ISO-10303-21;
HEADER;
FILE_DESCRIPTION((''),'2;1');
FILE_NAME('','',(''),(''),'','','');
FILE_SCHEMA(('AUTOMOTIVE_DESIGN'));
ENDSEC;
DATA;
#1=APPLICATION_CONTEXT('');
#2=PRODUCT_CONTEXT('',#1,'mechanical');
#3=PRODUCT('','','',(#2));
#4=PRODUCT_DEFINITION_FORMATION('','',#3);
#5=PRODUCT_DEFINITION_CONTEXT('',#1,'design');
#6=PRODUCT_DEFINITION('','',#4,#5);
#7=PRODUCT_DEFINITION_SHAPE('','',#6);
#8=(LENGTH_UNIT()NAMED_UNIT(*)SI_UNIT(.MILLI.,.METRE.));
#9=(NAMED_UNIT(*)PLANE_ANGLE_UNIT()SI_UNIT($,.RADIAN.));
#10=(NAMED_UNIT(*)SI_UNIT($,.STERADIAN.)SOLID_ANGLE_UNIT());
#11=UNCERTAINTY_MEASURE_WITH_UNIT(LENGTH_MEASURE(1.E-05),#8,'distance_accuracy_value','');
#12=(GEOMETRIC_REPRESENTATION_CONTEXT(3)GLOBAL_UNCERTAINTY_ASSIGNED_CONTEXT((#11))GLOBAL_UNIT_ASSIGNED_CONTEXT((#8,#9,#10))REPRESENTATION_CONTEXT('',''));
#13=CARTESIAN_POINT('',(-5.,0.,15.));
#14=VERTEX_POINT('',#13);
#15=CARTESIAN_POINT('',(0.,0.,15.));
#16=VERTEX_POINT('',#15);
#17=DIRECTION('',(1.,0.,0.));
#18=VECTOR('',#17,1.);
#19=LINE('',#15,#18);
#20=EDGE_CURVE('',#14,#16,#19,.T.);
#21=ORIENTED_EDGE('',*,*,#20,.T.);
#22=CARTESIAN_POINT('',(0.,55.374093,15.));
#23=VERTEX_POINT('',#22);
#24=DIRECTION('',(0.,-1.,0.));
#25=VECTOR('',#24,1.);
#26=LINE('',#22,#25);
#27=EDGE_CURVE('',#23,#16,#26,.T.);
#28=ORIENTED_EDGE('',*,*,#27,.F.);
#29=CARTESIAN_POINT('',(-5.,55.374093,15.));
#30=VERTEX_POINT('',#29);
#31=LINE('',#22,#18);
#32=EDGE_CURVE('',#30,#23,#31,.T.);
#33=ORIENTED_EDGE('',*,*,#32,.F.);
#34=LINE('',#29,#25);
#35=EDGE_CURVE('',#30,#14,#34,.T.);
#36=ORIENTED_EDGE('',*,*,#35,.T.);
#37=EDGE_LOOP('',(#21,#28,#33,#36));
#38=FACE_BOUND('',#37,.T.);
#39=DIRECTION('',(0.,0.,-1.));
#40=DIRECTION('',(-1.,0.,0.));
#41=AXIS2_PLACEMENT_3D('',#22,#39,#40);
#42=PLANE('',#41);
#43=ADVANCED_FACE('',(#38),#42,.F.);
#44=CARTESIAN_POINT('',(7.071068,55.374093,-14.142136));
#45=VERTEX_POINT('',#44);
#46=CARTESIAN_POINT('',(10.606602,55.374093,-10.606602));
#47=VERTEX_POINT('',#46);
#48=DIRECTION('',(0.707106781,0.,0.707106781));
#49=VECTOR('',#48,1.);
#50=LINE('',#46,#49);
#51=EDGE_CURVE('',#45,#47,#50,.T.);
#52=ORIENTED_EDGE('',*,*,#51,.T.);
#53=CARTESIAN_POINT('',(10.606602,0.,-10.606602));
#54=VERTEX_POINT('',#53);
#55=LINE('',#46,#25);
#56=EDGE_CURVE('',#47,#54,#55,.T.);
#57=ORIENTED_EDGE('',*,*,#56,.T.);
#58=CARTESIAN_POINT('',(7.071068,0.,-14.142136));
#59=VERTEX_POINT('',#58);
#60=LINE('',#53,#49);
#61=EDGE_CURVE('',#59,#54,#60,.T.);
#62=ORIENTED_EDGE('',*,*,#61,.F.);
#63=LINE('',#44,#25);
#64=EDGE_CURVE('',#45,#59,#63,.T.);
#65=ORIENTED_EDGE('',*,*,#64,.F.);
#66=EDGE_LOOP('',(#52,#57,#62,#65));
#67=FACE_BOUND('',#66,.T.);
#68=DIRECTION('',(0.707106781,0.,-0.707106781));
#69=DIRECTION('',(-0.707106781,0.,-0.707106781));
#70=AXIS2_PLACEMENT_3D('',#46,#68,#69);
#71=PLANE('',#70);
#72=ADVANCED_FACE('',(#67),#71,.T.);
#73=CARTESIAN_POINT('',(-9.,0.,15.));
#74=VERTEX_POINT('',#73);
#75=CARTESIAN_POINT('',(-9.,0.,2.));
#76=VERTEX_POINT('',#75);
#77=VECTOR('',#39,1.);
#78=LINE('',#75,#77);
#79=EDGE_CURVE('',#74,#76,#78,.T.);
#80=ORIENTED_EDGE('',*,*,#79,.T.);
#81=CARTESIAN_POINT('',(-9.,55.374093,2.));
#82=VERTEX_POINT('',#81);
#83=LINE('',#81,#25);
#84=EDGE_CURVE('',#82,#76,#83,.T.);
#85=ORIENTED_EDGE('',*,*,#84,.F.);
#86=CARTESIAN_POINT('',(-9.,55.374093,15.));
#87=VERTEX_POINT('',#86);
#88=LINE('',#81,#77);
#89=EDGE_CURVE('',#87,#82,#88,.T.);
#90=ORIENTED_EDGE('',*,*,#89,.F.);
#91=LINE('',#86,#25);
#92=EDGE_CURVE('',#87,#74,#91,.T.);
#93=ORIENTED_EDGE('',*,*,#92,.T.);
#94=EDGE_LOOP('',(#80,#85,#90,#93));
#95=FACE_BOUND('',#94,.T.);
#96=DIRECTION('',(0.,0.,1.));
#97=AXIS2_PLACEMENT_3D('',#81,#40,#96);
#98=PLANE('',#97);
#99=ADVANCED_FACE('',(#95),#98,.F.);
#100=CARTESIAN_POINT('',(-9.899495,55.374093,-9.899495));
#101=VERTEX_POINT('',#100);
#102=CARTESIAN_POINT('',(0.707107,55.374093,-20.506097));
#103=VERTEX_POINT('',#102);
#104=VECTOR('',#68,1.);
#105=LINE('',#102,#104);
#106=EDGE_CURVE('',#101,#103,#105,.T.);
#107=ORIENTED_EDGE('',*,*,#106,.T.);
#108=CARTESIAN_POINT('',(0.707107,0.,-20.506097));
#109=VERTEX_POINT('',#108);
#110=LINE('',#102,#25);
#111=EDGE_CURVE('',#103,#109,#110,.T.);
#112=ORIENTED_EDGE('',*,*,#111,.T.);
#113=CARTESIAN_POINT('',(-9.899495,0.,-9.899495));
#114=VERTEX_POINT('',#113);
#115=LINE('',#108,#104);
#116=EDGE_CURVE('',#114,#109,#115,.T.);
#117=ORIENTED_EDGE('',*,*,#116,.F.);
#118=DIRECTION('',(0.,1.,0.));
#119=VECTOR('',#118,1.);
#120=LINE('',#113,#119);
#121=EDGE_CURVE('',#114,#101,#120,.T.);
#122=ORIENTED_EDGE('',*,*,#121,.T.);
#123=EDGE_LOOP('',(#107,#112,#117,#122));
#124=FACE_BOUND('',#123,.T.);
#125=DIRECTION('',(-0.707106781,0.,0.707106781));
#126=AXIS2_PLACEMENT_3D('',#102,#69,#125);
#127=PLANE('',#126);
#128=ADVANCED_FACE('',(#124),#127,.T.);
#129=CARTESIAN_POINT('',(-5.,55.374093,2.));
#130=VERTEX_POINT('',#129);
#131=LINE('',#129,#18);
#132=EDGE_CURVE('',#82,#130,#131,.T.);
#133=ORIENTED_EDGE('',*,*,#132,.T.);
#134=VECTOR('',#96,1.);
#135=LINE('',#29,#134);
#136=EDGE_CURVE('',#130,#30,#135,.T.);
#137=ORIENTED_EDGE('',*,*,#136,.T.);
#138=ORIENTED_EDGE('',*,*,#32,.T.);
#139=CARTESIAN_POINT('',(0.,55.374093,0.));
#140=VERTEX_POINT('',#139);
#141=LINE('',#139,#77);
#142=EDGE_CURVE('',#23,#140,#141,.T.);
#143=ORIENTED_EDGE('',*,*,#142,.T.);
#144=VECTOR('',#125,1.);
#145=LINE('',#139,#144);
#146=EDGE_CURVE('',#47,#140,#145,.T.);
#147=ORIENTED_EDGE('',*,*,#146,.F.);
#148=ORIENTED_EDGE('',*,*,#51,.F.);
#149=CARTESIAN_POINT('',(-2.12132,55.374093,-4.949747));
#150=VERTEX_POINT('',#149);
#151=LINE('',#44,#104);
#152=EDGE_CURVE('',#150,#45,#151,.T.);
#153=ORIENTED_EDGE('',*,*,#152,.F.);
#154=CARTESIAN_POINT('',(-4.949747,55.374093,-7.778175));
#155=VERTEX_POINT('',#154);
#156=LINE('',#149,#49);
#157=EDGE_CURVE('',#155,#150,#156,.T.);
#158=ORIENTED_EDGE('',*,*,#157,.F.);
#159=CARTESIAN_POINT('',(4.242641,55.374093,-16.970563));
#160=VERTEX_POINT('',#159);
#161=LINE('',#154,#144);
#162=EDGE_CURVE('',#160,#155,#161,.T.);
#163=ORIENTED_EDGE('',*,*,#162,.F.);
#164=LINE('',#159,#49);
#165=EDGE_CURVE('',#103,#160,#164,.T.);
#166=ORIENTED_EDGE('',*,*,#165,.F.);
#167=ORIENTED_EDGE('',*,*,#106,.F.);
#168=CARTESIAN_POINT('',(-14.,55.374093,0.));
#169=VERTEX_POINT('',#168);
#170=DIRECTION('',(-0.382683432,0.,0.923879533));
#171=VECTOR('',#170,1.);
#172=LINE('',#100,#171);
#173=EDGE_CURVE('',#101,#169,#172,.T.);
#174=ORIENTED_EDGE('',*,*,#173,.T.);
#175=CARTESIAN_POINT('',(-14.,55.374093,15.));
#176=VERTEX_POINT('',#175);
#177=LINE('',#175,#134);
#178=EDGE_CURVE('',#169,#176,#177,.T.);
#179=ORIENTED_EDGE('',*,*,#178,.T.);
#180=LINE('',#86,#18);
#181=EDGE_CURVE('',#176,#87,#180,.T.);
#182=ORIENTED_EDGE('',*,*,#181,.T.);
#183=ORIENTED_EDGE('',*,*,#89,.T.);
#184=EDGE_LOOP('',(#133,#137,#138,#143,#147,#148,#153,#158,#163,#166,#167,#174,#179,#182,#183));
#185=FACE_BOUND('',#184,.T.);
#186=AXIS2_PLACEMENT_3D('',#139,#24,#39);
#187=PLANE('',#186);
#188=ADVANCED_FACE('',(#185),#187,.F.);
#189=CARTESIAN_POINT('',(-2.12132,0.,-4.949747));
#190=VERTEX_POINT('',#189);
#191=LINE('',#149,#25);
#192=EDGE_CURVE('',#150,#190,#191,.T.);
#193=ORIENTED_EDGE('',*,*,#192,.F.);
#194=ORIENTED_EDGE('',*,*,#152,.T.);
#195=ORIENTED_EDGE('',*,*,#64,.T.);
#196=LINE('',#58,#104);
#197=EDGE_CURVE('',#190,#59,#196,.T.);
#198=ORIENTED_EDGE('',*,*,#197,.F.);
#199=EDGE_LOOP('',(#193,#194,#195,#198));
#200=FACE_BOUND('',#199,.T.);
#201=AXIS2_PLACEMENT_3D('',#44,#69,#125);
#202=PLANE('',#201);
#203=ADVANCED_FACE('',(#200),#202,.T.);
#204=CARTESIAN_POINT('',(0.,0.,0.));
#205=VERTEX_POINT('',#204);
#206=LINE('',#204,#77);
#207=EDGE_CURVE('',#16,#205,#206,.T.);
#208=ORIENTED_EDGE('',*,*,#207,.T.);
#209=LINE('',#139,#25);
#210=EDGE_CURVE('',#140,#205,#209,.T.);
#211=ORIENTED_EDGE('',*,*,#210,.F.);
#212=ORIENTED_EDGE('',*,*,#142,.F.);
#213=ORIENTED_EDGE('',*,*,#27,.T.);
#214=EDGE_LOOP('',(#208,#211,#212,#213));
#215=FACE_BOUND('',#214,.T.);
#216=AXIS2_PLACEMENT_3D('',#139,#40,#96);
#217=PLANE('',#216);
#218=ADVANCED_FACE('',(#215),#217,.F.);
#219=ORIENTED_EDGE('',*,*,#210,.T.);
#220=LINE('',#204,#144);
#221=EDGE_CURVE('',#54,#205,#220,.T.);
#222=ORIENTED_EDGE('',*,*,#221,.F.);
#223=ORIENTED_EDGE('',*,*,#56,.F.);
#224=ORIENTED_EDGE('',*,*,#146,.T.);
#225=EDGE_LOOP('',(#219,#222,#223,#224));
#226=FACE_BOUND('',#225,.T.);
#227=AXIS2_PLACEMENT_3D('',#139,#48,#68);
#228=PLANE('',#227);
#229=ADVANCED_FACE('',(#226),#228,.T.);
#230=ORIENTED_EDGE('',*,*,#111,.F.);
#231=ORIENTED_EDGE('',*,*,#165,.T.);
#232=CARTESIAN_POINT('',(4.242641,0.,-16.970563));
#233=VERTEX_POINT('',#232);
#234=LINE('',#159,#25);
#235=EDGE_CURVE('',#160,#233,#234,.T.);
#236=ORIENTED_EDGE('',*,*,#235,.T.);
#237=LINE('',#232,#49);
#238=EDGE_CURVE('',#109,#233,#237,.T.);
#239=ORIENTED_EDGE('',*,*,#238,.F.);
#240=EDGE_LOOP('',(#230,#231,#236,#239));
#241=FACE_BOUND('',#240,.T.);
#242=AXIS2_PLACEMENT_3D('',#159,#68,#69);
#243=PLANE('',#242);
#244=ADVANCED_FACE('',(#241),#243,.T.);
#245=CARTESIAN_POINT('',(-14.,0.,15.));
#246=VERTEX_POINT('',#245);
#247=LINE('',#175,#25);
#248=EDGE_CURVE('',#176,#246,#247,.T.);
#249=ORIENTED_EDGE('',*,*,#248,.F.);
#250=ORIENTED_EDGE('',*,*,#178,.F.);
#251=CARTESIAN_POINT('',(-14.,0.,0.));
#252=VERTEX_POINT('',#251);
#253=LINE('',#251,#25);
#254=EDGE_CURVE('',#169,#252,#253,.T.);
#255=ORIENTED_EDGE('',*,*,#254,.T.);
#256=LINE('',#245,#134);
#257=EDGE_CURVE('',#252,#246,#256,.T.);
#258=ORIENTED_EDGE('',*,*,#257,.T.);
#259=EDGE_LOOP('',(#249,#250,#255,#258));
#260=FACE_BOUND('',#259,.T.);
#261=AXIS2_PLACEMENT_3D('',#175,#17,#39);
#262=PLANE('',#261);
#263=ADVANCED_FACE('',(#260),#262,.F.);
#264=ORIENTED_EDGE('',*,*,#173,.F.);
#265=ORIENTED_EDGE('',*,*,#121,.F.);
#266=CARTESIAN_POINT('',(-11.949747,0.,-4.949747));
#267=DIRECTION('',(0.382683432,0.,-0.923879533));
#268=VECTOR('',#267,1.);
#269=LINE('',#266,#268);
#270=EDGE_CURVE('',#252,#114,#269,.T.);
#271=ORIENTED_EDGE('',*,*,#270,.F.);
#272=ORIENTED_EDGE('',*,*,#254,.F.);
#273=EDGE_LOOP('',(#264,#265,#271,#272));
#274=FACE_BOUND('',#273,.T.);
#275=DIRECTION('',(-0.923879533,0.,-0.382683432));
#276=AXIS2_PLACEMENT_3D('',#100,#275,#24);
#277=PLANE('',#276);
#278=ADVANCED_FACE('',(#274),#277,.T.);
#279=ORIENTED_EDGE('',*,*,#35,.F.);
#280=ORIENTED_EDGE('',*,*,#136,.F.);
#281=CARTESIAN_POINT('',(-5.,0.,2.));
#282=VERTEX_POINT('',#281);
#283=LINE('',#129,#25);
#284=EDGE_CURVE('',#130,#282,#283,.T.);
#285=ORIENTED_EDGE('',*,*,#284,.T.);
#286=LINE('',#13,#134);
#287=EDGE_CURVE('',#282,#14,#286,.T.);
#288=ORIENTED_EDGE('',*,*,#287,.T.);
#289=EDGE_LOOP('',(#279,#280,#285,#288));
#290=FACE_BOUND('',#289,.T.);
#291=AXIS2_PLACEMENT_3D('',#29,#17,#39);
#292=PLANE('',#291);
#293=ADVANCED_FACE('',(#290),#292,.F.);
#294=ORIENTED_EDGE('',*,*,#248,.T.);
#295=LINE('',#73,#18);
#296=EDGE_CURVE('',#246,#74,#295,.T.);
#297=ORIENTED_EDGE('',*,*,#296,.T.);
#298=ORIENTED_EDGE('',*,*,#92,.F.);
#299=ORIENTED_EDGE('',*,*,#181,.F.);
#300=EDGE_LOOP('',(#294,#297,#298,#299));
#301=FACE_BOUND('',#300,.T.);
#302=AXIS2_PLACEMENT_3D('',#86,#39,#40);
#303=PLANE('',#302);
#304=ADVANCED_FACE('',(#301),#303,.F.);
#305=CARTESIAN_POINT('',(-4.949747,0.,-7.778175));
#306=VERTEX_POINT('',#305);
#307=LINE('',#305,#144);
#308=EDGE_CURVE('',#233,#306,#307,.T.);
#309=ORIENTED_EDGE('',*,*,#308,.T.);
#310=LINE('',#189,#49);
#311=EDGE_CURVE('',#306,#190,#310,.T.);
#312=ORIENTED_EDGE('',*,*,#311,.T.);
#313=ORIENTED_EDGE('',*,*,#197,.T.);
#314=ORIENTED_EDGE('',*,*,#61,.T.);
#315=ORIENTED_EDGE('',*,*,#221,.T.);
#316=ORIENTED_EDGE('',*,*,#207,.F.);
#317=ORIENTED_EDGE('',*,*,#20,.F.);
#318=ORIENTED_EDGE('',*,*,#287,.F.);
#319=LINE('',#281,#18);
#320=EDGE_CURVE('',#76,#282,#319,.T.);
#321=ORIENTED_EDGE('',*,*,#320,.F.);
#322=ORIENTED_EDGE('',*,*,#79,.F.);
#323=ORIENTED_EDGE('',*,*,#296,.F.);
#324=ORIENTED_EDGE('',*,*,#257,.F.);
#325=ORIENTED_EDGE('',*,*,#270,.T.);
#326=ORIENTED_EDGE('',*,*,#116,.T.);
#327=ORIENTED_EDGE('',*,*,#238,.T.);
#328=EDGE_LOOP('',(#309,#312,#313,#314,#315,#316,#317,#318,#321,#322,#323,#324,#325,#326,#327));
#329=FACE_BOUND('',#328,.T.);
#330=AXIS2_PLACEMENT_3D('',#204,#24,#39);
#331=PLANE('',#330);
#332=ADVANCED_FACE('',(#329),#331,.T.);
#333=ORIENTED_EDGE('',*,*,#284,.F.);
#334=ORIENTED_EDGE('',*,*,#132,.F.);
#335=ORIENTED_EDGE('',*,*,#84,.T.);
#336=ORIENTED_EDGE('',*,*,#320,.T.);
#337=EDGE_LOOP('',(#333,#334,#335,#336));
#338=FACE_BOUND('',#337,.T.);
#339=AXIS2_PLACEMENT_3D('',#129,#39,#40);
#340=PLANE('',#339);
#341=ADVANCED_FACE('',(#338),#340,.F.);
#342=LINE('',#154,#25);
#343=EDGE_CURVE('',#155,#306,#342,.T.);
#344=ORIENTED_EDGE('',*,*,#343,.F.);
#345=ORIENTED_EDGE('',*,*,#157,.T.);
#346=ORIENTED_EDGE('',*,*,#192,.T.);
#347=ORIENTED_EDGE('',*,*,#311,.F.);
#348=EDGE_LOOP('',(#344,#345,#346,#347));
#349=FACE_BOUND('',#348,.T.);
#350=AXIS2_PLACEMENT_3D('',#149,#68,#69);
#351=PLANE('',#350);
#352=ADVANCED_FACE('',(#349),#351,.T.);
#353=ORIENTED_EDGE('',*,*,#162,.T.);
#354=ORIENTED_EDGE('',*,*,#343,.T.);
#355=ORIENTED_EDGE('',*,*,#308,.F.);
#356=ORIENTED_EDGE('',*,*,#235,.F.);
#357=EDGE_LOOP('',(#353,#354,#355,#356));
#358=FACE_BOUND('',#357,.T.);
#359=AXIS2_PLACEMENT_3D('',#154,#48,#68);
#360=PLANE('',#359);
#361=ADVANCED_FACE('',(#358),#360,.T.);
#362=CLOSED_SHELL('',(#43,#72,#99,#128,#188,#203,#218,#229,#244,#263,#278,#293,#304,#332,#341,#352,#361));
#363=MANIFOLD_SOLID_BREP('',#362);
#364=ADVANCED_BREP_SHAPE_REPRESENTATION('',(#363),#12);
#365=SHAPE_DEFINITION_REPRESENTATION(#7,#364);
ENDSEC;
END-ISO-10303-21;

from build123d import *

# Parameters (mm, degrees)
BOSS_EXTRUDE1_DEPTH = 55.374093082
CHAMFER1_START      = -16
CHAMFER1_OUTLINE_W  = 58
CHAMFER1_OUTLINE_H  = 14
CHAMFER1_DEPTH      = 3.065686545


with BuildPart() as part:
    # Sketch2 → Boss-Extrude1 (new body)
    with BuildSketch(Plane(origin=(0, 0, 0), x_dir=(1, 0, 0), z_dir=(0, 1, 0))):
        Polygon((0, 0), (0, -15), (-5, -15), (-5, -2), (-9, -2), (-9, -15), (-14, -15), (-14, 5.798989873), align=None)
    boss_extrude1 = extrude(amount=BOSS_EXTRUDE1_DEPTH)

    # Mirror2: Boss-Extrude1 across plane
    add(boss_extrude1.mirror(Plane(origin=(0, 55.374093082, 0), x_dir=(0.9238795325112891, 0, 0.382683432365084), z_dir=(-0.382683432365084, 0, 0.9238795325112892))))

    # Chamfer1: read off the stored shape, not the designer's step
    # Chamfer1 outline → Chamfer1 (cut)
    with BuildSketch(Plane(origin=(0, 0, 0), x_dir=(0, 1, 0), z_dir=(0.9238795325112892, 0, 0.3826834323650841)).offset(CHAMFER1_START)):
        with Locations((28, 0)):
            Rectangle(CHAMFER1_OUTLINE_W, CHAMFER1_OUTLINE_H)
    extrude(amount=CHAMFER1_DEPTH, mode=Mode.SUBTRACT)


solid = part.part
